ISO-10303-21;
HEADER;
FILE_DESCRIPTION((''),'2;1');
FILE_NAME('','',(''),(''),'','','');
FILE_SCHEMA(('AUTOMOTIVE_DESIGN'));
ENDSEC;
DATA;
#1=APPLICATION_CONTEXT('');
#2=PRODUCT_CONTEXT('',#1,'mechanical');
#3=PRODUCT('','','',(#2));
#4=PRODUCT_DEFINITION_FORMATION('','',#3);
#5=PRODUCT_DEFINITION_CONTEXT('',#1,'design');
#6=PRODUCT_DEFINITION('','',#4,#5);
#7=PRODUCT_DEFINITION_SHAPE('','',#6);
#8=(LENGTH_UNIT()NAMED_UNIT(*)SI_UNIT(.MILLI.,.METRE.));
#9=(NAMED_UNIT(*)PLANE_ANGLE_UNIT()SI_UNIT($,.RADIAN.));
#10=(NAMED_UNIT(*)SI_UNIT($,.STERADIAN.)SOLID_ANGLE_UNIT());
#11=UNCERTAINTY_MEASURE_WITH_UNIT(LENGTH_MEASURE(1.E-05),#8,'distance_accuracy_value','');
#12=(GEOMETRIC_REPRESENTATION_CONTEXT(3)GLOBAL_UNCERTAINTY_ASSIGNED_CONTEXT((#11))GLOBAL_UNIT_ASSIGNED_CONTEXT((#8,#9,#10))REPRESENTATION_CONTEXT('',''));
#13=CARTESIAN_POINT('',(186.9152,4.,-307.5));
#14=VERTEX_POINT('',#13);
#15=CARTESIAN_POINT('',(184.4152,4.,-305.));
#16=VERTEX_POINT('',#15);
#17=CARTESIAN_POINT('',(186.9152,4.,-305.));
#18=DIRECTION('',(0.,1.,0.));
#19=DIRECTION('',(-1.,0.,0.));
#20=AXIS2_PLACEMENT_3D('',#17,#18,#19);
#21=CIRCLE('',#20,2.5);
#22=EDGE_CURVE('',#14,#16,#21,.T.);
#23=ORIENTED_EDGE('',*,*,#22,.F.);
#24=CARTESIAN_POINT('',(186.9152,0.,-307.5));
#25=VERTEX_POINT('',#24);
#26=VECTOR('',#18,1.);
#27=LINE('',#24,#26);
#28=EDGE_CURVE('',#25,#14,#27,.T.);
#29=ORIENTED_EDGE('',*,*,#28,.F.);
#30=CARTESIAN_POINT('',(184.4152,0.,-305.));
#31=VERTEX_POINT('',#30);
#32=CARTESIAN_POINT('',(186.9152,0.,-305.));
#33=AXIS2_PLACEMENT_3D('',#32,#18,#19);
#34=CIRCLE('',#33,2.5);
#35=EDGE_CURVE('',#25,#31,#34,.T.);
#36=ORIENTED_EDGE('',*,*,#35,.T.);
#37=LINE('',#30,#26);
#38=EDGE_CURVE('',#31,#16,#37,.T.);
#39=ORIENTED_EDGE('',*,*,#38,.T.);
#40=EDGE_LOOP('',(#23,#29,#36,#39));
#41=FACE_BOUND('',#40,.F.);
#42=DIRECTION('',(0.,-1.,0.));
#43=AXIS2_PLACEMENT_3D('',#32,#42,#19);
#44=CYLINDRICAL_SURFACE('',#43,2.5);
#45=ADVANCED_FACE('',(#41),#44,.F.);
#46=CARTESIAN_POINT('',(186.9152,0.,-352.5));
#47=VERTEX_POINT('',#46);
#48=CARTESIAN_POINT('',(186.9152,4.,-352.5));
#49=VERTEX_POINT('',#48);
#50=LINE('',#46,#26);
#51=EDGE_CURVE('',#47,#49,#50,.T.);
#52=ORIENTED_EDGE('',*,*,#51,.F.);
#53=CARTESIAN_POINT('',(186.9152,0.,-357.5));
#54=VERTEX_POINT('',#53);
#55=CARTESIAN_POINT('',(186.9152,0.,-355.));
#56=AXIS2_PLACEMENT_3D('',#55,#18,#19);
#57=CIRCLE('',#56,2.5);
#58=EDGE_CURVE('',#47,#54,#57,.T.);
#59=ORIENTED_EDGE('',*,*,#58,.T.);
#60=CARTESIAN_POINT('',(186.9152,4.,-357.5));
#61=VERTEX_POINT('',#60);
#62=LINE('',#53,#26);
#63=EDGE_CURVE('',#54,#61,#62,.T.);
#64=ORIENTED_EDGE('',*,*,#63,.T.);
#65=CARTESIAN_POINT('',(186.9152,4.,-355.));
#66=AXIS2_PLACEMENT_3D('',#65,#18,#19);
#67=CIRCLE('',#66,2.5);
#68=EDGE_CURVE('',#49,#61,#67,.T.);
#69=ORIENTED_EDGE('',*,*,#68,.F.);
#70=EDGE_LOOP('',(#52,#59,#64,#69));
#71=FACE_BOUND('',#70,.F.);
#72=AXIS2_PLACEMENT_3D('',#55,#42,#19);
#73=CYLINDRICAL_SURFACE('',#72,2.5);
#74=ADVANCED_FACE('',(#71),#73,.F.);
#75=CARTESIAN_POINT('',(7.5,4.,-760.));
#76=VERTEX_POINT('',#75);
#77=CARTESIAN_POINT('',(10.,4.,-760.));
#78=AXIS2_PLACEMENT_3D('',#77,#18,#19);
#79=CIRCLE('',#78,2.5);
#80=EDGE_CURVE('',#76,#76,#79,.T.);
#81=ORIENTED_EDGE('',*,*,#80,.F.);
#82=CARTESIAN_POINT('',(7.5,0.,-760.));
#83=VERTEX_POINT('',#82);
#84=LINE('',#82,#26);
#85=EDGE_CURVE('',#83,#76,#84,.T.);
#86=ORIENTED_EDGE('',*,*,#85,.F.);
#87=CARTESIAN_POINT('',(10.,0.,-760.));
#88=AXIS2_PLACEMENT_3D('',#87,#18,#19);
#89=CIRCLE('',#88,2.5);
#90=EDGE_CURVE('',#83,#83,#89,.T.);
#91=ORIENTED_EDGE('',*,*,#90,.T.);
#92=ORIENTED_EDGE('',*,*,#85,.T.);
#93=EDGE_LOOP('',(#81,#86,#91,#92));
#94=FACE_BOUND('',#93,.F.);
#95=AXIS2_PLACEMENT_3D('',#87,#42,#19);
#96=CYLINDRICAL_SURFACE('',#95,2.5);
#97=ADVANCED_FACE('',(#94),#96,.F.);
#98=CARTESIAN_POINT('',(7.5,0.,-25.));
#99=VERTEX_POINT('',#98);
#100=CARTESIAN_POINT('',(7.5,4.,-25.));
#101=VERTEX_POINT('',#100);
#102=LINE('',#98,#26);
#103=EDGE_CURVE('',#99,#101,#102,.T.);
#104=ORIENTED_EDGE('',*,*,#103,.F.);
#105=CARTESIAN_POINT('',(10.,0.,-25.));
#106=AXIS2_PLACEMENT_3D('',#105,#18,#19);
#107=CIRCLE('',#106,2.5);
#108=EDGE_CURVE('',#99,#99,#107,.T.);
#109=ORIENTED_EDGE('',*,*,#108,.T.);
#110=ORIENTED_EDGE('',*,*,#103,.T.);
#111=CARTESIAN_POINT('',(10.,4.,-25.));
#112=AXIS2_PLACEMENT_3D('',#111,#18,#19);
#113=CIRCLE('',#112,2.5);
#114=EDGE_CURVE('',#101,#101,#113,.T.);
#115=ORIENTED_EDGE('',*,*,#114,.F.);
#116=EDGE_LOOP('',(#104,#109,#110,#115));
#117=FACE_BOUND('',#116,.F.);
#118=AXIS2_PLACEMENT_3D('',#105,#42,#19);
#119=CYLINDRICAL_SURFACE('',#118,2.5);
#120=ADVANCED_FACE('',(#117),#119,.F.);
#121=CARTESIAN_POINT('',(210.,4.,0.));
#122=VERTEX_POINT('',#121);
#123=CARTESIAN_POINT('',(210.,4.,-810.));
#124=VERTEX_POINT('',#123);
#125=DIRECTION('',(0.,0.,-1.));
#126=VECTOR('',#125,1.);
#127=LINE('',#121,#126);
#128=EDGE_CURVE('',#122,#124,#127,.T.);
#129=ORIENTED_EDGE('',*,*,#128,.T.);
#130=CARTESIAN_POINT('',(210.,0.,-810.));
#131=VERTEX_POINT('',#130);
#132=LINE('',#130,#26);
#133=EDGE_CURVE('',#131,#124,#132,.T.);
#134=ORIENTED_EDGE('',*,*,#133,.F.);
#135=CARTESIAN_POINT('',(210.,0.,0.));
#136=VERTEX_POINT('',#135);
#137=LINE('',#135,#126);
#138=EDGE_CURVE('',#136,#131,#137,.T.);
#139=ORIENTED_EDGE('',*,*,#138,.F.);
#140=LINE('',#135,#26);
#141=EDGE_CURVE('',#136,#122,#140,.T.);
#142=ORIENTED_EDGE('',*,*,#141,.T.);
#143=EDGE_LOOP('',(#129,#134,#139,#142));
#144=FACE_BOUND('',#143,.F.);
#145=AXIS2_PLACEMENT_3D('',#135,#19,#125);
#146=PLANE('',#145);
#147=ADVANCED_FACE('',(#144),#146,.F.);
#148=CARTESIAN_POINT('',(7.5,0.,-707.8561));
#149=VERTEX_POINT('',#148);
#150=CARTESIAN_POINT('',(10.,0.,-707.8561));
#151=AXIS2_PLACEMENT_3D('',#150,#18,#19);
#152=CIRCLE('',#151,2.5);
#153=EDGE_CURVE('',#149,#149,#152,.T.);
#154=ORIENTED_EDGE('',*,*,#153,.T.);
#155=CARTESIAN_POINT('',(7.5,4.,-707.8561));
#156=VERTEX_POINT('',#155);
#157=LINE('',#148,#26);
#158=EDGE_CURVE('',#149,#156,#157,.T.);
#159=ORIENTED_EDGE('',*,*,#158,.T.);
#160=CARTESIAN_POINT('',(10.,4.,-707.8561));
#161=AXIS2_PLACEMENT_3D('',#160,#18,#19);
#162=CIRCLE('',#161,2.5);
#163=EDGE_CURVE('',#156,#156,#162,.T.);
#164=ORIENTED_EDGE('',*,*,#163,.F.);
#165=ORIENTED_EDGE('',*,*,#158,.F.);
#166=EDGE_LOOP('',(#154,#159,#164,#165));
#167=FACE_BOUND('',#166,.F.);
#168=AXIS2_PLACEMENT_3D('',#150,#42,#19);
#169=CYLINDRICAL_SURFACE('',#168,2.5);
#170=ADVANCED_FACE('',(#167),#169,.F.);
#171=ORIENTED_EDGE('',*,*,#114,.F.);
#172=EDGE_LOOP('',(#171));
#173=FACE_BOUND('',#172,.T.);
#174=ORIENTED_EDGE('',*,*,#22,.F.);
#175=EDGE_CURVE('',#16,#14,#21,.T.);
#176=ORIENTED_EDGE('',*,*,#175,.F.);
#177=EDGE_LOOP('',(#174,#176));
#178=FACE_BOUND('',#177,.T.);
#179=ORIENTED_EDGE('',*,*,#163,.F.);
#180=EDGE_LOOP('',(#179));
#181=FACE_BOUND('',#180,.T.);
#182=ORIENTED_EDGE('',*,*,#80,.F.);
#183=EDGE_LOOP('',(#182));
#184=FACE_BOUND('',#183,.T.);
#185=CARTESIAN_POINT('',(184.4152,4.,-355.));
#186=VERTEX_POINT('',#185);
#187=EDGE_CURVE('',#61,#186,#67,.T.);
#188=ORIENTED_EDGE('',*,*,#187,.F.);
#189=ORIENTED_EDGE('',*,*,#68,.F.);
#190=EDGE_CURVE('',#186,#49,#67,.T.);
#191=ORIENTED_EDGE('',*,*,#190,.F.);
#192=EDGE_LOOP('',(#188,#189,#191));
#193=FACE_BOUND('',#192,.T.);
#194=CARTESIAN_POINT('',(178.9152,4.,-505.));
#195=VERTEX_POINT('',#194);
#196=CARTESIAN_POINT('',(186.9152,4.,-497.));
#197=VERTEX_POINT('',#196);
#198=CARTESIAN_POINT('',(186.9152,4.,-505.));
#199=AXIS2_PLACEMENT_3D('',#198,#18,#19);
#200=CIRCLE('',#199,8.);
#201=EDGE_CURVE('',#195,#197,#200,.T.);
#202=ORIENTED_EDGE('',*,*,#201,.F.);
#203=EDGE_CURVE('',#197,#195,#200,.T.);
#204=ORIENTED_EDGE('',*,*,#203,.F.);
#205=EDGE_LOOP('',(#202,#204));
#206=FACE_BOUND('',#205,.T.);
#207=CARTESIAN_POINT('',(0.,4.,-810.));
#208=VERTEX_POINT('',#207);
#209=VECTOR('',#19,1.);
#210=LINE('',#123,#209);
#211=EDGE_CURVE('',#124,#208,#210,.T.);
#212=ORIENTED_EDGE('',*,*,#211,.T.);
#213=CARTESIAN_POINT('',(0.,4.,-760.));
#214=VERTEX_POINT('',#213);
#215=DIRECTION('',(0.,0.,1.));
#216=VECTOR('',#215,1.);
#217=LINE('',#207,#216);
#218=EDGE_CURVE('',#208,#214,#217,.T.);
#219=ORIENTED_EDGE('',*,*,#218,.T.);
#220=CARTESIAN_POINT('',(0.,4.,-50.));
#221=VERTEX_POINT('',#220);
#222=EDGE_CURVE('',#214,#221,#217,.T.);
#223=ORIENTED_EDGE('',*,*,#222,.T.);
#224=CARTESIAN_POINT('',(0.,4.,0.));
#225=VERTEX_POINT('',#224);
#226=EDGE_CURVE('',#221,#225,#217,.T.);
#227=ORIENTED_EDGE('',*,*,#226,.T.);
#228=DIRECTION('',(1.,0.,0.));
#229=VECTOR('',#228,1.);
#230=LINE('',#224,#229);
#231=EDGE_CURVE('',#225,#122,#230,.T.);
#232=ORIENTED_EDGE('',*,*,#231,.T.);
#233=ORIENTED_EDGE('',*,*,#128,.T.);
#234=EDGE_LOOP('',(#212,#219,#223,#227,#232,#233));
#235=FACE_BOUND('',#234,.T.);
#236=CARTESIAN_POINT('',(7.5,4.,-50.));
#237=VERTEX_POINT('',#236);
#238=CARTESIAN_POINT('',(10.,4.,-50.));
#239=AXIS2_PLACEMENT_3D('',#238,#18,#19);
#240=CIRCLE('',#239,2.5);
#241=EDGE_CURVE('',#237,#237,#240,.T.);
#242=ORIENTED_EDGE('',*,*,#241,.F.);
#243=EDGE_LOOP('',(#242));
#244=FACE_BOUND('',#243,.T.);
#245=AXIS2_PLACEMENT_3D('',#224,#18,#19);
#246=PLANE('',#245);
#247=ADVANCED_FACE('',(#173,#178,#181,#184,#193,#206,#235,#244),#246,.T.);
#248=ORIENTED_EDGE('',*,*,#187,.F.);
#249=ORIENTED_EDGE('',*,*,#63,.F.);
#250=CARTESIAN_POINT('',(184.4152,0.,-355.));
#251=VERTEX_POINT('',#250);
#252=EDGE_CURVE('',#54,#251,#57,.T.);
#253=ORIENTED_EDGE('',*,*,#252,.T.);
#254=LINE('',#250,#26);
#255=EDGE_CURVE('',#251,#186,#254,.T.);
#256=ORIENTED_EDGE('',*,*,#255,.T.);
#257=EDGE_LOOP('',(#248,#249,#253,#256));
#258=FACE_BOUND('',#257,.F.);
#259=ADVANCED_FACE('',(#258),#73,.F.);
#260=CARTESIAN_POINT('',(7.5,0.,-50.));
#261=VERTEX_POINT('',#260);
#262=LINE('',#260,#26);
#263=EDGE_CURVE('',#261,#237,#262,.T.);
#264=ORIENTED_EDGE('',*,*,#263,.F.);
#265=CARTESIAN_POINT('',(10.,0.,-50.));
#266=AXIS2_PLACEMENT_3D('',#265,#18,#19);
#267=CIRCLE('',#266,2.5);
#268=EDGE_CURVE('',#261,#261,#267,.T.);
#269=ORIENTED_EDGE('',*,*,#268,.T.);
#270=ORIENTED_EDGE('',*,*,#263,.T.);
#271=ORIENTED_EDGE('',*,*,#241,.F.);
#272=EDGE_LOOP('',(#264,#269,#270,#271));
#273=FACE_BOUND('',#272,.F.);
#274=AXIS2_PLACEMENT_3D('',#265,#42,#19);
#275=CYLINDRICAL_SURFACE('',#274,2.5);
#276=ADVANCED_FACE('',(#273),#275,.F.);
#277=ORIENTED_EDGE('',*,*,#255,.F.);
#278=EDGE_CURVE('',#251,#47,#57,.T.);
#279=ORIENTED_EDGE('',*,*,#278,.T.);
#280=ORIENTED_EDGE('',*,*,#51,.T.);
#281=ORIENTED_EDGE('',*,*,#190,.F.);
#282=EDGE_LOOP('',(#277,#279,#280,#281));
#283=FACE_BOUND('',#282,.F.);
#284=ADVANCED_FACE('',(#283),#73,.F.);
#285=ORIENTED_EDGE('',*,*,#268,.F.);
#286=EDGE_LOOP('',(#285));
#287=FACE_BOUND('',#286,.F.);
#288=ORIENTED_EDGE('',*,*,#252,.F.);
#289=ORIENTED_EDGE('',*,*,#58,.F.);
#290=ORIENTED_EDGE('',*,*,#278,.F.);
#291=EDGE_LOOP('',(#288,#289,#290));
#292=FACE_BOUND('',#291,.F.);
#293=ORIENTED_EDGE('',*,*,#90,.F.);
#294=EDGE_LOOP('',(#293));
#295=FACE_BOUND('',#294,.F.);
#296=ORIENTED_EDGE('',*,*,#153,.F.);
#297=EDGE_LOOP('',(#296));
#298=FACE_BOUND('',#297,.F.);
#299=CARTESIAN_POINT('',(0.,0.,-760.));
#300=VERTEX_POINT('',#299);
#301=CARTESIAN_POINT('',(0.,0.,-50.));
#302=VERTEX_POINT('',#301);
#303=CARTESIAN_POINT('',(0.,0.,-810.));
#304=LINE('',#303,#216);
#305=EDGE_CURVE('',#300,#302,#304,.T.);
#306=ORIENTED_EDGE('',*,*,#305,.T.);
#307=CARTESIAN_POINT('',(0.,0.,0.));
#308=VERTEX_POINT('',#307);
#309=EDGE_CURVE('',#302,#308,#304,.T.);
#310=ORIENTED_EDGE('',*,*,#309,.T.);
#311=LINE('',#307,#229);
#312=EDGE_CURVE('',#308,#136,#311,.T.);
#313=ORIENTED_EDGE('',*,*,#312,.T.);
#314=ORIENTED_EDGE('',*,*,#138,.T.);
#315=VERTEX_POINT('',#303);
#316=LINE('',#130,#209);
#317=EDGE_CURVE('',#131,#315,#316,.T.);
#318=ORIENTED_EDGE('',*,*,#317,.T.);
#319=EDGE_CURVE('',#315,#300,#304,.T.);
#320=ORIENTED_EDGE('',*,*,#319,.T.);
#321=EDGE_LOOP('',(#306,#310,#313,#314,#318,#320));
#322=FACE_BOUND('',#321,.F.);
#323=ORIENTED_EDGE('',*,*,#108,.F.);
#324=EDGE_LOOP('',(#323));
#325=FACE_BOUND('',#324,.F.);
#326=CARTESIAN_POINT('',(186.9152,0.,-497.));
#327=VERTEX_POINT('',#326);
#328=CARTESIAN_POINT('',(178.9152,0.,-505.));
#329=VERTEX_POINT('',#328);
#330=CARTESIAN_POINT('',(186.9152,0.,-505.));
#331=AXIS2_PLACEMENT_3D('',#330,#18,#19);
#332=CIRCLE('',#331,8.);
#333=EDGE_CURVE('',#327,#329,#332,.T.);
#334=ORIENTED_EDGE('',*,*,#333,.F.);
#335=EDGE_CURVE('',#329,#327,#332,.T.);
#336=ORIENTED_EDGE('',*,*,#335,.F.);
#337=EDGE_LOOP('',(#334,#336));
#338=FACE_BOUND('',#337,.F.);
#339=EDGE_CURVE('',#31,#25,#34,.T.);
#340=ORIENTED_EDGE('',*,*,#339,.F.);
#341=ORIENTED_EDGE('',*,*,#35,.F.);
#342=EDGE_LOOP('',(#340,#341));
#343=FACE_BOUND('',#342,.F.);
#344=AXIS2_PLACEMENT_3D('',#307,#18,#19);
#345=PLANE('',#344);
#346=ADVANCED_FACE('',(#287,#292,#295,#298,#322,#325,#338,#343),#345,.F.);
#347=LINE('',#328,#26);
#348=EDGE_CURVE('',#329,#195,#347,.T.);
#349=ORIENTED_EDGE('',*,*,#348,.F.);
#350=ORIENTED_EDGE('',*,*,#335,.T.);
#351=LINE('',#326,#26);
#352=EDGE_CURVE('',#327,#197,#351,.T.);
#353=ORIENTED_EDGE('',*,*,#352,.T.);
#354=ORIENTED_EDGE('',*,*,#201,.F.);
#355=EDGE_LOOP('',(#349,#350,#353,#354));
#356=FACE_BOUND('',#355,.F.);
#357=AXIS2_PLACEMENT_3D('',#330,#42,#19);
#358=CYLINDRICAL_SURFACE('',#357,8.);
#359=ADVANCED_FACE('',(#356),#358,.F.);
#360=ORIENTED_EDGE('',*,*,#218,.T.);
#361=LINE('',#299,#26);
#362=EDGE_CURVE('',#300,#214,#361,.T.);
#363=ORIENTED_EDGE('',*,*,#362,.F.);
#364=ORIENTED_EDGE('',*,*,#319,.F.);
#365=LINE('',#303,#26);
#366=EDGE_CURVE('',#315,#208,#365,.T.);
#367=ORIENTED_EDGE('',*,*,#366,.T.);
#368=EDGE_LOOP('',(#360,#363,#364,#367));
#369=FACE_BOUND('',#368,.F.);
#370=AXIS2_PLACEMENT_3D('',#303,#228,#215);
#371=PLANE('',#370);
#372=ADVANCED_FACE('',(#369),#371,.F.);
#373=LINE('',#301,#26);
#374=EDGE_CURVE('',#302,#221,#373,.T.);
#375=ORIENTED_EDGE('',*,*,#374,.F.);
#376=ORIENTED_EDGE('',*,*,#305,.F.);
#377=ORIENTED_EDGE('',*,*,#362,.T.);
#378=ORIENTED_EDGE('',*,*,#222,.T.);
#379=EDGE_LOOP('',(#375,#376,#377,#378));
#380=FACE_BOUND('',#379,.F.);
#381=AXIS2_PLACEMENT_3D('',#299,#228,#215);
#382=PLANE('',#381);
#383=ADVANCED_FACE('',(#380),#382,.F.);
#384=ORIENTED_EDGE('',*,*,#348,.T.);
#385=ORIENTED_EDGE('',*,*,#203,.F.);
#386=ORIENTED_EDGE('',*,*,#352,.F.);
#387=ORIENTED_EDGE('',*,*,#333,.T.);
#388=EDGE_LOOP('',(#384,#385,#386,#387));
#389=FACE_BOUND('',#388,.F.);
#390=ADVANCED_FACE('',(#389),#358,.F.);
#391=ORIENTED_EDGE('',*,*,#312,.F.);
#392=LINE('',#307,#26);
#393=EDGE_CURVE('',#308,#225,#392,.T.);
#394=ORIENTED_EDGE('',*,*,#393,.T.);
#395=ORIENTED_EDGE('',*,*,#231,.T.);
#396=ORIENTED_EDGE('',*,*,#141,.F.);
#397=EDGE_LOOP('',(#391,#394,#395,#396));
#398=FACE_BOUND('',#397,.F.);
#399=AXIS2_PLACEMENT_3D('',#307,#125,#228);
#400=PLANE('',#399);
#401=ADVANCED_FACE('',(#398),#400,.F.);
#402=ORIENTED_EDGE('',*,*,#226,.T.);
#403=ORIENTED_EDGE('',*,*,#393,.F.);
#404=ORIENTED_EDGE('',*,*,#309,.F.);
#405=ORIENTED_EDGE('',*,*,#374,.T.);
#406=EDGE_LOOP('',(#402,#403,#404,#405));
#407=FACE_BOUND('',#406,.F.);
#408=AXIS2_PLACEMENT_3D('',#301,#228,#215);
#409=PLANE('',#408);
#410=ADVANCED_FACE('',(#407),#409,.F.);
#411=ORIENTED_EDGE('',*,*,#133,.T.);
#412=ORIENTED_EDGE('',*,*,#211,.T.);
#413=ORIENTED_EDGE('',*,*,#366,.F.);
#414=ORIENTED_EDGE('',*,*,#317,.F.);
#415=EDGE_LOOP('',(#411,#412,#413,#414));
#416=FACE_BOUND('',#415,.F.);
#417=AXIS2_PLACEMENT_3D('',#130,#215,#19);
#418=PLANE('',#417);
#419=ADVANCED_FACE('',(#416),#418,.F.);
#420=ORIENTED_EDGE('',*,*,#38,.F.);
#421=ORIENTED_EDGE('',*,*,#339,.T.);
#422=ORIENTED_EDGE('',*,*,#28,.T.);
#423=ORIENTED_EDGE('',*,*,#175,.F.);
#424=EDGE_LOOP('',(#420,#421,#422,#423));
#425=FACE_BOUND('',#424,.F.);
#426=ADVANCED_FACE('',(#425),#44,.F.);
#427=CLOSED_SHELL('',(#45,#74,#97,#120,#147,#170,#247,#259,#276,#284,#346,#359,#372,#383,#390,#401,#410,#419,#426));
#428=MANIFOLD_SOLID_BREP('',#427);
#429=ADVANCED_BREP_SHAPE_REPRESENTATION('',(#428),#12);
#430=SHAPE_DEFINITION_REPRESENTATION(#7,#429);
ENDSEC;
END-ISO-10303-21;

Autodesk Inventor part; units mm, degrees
ref_plane "YZ Plane" through (0, 0, 0) normal (1, 0, 0) x (0, 1, 0)
ref_plane "XZ Plane" through (0, 0, 0) normal (0, 1, 0) x (-1, 0, 0)
ref_plane "XY Plane" through (0, 0, 0) normal (0, 0, 1) x (1, 0, 0)
sketch "Эскиз1" plane through (0, 0, 0) normal (0, 1, 0) x (-1, 0, 0)
  line L0 (0, 0) -> (-210, 0)
  line L1 (-210, 0) -> (-210, -810)
  line L2 (-210, -810) -> (0, -810)
  line L3 (0, -810) -> (0, 0)
  line L4 (-186.9152, -405) -> (-186.9152, -395)
  line L5 (-186.9152, -395) -> (-186.9152, -305)
  line L6 (-186.9152, -305) -> (-186.9152, -505)
  circle A0 centre (-186.9152, -505) radius 8
  circle A1 centre (-186.9152, -305) radius 2.5
  line L7 (-186.9152, -305) -> (-186.9152, -310)
  line L8 (-186.9152, -310) -> (-186.9152, -355)
  circle A2 centre (-186.9152, -355) radius 2.5
  line L9 (0, 0) -> (0, -50)
  line L10 (0, -50) -> (-10, -50)
  line L11 (0, -810) -> (0, -760)
  line L12 (0, -760) -> (-10, -760)
  circle A3 centre (-10, -760) radius 2.5
  circle A4 centre (-10, -707.8561) radius 2.5
  circle A5 centre (-10, -50) radius 2.5
  circle A6 centre (-10, -25) radius 2.5
  dimension "d0" = 210
  dimension "d1" = 810
  dimension "d2" = 10
  dimension "d3" = 90
  dimension "d4" = 200
  dimension "d5" = 16
  dimension "d6" = 5
  dimension "d7" = 5
  dimension "d8" = 45
  dimension "d9" = 5
  dimension "d10" = 50
  dimension "d11" = 10
  dimension "d12" = 50
  dimension "d13" = 10
  dimension "d14" = 5
  dimension "d15" = 5
  dimension "d16" = 5
  dimension "d17" = 5
extrude "Выдавливание1" add sketch "Эскиз1" along normal blind 4
properties part number "Дверь"
